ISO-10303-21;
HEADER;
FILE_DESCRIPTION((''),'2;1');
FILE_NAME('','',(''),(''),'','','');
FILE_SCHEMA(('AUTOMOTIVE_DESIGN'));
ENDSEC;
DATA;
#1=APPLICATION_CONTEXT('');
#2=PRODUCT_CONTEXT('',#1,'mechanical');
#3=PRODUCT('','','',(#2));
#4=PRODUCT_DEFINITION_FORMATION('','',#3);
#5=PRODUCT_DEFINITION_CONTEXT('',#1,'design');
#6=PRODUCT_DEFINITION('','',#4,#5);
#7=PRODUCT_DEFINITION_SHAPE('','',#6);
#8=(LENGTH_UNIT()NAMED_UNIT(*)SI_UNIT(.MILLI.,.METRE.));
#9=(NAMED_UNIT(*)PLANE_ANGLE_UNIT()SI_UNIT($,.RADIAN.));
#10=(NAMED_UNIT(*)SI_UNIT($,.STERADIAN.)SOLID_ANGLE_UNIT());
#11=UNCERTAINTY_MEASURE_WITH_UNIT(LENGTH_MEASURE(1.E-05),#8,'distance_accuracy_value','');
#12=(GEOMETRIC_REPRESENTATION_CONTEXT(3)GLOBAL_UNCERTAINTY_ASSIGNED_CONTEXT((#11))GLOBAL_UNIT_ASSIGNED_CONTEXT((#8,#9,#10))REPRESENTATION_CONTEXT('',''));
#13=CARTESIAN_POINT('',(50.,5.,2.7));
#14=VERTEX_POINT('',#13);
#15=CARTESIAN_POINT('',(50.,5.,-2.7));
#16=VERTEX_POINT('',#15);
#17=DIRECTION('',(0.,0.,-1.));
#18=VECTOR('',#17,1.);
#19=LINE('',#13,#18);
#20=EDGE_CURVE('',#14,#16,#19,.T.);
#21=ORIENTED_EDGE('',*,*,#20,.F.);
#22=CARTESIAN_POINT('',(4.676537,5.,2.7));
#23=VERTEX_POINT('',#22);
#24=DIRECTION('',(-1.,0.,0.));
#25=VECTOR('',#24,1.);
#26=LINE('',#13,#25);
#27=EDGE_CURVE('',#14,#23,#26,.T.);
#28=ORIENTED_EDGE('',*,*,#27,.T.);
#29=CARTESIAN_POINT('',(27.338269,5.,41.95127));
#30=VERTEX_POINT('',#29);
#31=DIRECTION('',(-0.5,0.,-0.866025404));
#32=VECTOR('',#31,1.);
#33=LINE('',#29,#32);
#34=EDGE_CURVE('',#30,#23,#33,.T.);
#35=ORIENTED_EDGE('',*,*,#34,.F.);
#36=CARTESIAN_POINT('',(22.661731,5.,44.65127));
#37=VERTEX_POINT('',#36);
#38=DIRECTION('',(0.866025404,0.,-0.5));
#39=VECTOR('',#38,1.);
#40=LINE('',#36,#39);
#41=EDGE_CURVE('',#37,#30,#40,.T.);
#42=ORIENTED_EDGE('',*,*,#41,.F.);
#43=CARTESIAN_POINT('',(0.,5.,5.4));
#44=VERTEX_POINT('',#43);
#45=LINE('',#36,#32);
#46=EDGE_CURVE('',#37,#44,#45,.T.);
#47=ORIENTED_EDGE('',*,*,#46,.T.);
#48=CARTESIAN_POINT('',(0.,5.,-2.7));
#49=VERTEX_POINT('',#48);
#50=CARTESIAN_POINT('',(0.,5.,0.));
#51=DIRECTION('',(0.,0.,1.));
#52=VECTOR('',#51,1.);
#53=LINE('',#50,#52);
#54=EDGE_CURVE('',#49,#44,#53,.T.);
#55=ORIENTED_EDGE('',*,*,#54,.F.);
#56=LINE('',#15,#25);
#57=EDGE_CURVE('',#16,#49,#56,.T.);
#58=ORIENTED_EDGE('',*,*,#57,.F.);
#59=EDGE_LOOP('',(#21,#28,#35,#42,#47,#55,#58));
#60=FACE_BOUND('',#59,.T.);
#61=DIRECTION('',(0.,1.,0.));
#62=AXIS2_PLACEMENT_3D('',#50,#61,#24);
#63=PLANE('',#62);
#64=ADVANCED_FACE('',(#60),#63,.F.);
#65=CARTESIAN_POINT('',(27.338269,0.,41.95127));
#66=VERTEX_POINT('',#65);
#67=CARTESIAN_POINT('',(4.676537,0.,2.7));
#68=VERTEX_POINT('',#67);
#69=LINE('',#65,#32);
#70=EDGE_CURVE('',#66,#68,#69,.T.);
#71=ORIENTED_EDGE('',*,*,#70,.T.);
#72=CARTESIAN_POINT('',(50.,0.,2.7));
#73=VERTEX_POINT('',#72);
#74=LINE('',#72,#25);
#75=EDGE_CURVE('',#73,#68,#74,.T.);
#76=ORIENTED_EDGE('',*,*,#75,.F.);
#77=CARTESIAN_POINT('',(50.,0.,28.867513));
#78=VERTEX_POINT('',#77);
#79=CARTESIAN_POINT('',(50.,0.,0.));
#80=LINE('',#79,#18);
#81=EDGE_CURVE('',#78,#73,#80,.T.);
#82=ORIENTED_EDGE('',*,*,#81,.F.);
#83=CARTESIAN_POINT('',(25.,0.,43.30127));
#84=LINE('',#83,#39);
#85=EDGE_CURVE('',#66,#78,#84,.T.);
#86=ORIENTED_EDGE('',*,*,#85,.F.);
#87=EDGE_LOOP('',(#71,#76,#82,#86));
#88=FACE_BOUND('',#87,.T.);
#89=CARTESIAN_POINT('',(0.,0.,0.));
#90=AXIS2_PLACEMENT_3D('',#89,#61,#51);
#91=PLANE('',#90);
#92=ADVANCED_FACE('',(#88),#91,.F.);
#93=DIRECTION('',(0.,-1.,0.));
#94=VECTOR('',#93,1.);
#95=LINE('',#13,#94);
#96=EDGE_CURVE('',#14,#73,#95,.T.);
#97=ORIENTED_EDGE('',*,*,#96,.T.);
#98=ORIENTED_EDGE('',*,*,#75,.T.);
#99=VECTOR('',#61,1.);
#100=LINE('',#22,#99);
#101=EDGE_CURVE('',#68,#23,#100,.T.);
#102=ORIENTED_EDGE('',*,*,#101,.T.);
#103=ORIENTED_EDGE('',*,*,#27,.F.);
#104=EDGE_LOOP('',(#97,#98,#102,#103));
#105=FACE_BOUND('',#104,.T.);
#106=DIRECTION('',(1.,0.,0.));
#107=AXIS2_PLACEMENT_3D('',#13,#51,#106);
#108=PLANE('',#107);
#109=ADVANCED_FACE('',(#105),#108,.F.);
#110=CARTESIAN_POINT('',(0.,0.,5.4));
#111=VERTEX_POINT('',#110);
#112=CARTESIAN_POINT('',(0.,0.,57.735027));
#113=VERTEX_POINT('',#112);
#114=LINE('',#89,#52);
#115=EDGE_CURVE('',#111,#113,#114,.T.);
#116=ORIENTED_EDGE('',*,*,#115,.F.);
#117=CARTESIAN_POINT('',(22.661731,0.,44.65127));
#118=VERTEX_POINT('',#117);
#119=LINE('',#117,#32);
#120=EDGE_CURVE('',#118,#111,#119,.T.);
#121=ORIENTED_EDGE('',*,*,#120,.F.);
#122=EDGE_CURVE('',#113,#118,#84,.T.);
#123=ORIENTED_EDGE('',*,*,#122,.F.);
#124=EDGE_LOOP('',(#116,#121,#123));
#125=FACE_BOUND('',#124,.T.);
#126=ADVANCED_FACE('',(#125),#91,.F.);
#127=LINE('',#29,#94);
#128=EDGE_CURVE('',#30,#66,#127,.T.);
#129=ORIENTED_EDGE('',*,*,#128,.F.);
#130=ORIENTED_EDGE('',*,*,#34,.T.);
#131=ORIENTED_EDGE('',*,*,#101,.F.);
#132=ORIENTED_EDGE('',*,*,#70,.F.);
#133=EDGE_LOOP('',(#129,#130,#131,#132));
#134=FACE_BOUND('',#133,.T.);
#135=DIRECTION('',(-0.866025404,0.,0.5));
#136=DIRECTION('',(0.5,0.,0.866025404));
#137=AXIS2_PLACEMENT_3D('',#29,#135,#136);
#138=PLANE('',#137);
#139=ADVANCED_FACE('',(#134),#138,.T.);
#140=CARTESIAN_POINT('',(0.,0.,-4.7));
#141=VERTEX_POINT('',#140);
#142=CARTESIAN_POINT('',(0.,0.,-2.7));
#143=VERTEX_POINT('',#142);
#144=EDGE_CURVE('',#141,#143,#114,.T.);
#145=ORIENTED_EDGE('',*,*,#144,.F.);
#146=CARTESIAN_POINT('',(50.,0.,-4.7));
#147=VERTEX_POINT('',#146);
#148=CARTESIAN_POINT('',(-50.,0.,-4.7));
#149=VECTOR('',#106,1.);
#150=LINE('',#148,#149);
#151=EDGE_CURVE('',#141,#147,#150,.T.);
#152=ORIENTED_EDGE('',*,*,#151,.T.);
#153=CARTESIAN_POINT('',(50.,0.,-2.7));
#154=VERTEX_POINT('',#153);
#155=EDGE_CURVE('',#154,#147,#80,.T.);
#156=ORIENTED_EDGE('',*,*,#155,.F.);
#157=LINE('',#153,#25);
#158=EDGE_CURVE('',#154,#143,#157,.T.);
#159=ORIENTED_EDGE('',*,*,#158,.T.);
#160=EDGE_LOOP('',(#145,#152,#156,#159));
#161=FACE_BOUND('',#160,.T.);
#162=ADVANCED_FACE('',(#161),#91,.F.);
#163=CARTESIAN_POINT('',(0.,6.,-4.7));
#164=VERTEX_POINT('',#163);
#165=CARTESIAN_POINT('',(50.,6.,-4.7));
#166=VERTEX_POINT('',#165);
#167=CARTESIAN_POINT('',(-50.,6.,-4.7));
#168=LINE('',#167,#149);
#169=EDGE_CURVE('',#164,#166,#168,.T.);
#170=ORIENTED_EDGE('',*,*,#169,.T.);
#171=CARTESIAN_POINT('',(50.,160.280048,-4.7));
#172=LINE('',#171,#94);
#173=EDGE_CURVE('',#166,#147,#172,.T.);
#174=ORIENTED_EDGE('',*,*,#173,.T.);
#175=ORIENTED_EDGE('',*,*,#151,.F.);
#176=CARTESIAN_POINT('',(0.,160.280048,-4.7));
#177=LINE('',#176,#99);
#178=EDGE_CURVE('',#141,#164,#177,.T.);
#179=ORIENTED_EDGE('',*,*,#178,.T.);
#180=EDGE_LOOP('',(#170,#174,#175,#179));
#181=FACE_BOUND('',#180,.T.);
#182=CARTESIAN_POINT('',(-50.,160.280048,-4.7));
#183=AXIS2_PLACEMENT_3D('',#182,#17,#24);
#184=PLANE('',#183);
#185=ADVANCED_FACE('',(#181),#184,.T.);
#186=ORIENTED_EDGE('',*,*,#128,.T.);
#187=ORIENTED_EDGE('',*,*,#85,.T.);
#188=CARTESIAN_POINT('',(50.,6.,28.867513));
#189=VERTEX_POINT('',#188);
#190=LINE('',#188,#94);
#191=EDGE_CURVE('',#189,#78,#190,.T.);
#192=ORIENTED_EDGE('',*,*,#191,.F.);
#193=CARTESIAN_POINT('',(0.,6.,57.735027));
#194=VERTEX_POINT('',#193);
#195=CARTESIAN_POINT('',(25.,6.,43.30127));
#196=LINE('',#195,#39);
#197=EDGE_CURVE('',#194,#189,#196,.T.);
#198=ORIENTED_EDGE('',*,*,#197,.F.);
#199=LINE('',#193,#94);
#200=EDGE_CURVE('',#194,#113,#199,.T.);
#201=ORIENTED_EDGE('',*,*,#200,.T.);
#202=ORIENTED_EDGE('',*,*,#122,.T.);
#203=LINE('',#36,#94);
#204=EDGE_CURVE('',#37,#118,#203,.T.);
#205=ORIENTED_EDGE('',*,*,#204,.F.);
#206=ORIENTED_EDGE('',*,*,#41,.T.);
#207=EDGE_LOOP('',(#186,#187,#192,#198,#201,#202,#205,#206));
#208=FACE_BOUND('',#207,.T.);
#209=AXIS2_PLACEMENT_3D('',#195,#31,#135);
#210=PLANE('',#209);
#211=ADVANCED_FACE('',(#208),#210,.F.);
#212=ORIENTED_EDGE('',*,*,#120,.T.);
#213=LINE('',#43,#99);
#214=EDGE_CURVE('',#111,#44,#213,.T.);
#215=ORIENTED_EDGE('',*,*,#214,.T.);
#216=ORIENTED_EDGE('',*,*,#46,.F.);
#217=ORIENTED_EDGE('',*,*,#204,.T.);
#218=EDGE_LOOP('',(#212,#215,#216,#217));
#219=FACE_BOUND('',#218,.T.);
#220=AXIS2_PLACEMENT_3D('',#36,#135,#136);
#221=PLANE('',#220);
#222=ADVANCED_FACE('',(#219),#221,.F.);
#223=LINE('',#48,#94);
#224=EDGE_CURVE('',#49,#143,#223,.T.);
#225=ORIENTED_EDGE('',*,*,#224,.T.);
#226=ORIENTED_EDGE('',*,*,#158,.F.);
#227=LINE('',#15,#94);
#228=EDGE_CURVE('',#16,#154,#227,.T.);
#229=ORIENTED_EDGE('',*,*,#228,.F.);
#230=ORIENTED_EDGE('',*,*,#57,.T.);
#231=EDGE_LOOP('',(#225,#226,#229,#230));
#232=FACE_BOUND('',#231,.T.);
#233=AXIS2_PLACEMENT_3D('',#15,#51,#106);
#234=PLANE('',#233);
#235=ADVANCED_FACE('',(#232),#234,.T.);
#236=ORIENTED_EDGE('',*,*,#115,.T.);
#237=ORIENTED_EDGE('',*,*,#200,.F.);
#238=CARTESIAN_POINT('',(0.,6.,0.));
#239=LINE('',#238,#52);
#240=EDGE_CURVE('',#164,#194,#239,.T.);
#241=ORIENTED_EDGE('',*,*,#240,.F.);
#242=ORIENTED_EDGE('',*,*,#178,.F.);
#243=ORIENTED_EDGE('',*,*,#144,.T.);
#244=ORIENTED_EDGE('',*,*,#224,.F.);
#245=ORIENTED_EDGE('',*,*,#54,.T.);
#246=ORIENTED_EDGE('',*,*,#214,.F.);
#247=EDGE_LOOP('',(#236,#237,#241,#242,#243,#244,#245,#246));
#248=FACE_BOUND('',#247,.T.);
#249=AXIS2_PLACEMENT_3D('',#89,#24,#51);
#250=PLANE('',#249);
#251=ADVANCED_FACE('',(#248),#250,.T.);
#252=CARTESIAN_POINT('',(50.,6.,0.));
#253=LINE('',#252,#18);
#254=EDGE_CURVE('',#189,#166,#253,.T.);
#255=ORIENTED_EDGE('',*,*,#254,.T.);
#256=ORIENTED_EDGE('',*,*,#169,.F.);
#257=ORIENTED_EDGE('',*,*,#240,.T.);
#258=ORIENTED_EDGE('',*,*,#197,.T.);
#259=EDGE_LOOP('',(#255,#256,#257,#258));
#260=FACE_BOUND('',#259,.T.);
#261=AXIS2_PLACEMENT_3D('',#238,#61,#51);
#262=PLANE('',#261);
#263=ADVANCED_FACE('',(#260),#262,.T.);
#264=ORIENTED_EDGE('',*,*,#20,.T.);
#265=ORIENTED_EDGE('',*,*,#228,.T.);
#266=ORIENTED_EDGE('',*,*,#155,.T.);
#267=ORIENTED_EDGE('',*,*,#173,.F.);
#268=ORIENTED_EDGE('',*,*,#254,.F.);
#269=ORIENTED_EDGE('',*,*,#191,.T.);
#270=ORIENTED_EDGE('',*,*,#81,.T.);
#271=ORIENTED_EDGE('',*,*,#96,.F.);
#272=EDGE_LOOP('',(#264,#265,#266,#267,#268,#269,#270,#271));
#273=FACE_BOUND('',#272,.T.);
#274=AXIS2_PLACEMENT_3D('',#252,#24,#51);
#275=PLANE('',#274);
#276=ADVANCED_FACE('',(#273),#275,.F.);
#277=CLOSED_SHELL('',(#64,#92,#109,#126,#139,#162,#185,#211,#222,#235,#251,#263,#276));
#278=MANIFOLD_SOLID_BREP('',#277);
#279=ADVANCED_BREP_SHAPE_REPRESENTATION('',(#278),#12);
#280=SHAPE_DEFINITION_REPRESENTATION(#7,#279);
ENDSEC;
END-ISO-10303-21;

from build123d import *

# Parameters (mm, degrees)
BOSS_EXTRUDE1_DEPTH     = 6
SKETCH2_W               = 100
SKETCH2_H               = 5.4
CUT_EXTRUDE_THIN1_DEPTH = 5
SKETCH3_OUTSIDE_W       = 132.574
SKETCH3_OUTSIDE_H       = 148.044
CUT_EXTRUDE1_DEPTH      = 6
INTERSECT1_START        = -50
INTERSECT1_DEPTH        = 50


# Read off the part's stored shape, not the designer's step: Intersect1
with BuildPart() as part:
    # Sketch1 → Boss-Extrude1 (new body)
    with BuildSketch(Plane(origin=(0, 0, 0), x_dir=(1, 0, 0), z_dir=(0, 1, 0))):
        Polygon((0, 57.735026919), (-50, 28.867513459), (-50, -28.867513459), (0, -57.735026919), (50, -28.867513459), (50, 28.867513459), align=None)
    extrude(amount=BOSS_EXTRUDE1_DEPTH)

    # Sketch2 → Cut-Extrude-Thin1 (cut)
    with BuildSketch(Plane.XZ):
        Polygon((-27.33826859, 41.951270189), (-3.33826859, 0.382050808), (1.33826859, 3.082050808), (-22.66173141, 44.651270189), align=None)
        Rectangle(SKETCH2_W, SKETCH2_H)
        Polygon((22.66173141, 44.651270189), (-1.33826859, 3.082050808), (3.33826859, 0.382050808), (27.33826859, 41.951270189), align=None)
    extrude(amount=-CUT_EXTRUDE_THIN1_DEPTH, mode=Mode.SUBTRACT)

    # Sketch3 outside → Cut-Extrude1 (cut)
    with BuildSketch(Plane.XZ):
        Rectangle(SKETCH3_OUTSIDE_W, SKETCH3_OUTSIDE_H)
        Polygon((-50, 28.867513459), (0, 57.735026919), (50, 28.867513459), (50, -4.7), (-50, -4.7), align=None, mode=Mode.SUBTRACT)
    extrude(amount=-CUT_EXTRUDE1_DEPTH, mode=Mode.SUBTRACT)

    # Intersect1 outline → Intersect1 (cut)
    with BuildSketch(Plane.YZ.offset(INTERSECT1_START)):
        Polygon((0, -2.7), (0, -4.7), (6, -4.7), (6, 59), (0, 59), (0, 2.7), (5, 2.7), (5, -2.7), align=None)
    extrude(amount=INTERSECT1_DEPTH, mode=Mode.SUBTRACT)


solid = part.part
